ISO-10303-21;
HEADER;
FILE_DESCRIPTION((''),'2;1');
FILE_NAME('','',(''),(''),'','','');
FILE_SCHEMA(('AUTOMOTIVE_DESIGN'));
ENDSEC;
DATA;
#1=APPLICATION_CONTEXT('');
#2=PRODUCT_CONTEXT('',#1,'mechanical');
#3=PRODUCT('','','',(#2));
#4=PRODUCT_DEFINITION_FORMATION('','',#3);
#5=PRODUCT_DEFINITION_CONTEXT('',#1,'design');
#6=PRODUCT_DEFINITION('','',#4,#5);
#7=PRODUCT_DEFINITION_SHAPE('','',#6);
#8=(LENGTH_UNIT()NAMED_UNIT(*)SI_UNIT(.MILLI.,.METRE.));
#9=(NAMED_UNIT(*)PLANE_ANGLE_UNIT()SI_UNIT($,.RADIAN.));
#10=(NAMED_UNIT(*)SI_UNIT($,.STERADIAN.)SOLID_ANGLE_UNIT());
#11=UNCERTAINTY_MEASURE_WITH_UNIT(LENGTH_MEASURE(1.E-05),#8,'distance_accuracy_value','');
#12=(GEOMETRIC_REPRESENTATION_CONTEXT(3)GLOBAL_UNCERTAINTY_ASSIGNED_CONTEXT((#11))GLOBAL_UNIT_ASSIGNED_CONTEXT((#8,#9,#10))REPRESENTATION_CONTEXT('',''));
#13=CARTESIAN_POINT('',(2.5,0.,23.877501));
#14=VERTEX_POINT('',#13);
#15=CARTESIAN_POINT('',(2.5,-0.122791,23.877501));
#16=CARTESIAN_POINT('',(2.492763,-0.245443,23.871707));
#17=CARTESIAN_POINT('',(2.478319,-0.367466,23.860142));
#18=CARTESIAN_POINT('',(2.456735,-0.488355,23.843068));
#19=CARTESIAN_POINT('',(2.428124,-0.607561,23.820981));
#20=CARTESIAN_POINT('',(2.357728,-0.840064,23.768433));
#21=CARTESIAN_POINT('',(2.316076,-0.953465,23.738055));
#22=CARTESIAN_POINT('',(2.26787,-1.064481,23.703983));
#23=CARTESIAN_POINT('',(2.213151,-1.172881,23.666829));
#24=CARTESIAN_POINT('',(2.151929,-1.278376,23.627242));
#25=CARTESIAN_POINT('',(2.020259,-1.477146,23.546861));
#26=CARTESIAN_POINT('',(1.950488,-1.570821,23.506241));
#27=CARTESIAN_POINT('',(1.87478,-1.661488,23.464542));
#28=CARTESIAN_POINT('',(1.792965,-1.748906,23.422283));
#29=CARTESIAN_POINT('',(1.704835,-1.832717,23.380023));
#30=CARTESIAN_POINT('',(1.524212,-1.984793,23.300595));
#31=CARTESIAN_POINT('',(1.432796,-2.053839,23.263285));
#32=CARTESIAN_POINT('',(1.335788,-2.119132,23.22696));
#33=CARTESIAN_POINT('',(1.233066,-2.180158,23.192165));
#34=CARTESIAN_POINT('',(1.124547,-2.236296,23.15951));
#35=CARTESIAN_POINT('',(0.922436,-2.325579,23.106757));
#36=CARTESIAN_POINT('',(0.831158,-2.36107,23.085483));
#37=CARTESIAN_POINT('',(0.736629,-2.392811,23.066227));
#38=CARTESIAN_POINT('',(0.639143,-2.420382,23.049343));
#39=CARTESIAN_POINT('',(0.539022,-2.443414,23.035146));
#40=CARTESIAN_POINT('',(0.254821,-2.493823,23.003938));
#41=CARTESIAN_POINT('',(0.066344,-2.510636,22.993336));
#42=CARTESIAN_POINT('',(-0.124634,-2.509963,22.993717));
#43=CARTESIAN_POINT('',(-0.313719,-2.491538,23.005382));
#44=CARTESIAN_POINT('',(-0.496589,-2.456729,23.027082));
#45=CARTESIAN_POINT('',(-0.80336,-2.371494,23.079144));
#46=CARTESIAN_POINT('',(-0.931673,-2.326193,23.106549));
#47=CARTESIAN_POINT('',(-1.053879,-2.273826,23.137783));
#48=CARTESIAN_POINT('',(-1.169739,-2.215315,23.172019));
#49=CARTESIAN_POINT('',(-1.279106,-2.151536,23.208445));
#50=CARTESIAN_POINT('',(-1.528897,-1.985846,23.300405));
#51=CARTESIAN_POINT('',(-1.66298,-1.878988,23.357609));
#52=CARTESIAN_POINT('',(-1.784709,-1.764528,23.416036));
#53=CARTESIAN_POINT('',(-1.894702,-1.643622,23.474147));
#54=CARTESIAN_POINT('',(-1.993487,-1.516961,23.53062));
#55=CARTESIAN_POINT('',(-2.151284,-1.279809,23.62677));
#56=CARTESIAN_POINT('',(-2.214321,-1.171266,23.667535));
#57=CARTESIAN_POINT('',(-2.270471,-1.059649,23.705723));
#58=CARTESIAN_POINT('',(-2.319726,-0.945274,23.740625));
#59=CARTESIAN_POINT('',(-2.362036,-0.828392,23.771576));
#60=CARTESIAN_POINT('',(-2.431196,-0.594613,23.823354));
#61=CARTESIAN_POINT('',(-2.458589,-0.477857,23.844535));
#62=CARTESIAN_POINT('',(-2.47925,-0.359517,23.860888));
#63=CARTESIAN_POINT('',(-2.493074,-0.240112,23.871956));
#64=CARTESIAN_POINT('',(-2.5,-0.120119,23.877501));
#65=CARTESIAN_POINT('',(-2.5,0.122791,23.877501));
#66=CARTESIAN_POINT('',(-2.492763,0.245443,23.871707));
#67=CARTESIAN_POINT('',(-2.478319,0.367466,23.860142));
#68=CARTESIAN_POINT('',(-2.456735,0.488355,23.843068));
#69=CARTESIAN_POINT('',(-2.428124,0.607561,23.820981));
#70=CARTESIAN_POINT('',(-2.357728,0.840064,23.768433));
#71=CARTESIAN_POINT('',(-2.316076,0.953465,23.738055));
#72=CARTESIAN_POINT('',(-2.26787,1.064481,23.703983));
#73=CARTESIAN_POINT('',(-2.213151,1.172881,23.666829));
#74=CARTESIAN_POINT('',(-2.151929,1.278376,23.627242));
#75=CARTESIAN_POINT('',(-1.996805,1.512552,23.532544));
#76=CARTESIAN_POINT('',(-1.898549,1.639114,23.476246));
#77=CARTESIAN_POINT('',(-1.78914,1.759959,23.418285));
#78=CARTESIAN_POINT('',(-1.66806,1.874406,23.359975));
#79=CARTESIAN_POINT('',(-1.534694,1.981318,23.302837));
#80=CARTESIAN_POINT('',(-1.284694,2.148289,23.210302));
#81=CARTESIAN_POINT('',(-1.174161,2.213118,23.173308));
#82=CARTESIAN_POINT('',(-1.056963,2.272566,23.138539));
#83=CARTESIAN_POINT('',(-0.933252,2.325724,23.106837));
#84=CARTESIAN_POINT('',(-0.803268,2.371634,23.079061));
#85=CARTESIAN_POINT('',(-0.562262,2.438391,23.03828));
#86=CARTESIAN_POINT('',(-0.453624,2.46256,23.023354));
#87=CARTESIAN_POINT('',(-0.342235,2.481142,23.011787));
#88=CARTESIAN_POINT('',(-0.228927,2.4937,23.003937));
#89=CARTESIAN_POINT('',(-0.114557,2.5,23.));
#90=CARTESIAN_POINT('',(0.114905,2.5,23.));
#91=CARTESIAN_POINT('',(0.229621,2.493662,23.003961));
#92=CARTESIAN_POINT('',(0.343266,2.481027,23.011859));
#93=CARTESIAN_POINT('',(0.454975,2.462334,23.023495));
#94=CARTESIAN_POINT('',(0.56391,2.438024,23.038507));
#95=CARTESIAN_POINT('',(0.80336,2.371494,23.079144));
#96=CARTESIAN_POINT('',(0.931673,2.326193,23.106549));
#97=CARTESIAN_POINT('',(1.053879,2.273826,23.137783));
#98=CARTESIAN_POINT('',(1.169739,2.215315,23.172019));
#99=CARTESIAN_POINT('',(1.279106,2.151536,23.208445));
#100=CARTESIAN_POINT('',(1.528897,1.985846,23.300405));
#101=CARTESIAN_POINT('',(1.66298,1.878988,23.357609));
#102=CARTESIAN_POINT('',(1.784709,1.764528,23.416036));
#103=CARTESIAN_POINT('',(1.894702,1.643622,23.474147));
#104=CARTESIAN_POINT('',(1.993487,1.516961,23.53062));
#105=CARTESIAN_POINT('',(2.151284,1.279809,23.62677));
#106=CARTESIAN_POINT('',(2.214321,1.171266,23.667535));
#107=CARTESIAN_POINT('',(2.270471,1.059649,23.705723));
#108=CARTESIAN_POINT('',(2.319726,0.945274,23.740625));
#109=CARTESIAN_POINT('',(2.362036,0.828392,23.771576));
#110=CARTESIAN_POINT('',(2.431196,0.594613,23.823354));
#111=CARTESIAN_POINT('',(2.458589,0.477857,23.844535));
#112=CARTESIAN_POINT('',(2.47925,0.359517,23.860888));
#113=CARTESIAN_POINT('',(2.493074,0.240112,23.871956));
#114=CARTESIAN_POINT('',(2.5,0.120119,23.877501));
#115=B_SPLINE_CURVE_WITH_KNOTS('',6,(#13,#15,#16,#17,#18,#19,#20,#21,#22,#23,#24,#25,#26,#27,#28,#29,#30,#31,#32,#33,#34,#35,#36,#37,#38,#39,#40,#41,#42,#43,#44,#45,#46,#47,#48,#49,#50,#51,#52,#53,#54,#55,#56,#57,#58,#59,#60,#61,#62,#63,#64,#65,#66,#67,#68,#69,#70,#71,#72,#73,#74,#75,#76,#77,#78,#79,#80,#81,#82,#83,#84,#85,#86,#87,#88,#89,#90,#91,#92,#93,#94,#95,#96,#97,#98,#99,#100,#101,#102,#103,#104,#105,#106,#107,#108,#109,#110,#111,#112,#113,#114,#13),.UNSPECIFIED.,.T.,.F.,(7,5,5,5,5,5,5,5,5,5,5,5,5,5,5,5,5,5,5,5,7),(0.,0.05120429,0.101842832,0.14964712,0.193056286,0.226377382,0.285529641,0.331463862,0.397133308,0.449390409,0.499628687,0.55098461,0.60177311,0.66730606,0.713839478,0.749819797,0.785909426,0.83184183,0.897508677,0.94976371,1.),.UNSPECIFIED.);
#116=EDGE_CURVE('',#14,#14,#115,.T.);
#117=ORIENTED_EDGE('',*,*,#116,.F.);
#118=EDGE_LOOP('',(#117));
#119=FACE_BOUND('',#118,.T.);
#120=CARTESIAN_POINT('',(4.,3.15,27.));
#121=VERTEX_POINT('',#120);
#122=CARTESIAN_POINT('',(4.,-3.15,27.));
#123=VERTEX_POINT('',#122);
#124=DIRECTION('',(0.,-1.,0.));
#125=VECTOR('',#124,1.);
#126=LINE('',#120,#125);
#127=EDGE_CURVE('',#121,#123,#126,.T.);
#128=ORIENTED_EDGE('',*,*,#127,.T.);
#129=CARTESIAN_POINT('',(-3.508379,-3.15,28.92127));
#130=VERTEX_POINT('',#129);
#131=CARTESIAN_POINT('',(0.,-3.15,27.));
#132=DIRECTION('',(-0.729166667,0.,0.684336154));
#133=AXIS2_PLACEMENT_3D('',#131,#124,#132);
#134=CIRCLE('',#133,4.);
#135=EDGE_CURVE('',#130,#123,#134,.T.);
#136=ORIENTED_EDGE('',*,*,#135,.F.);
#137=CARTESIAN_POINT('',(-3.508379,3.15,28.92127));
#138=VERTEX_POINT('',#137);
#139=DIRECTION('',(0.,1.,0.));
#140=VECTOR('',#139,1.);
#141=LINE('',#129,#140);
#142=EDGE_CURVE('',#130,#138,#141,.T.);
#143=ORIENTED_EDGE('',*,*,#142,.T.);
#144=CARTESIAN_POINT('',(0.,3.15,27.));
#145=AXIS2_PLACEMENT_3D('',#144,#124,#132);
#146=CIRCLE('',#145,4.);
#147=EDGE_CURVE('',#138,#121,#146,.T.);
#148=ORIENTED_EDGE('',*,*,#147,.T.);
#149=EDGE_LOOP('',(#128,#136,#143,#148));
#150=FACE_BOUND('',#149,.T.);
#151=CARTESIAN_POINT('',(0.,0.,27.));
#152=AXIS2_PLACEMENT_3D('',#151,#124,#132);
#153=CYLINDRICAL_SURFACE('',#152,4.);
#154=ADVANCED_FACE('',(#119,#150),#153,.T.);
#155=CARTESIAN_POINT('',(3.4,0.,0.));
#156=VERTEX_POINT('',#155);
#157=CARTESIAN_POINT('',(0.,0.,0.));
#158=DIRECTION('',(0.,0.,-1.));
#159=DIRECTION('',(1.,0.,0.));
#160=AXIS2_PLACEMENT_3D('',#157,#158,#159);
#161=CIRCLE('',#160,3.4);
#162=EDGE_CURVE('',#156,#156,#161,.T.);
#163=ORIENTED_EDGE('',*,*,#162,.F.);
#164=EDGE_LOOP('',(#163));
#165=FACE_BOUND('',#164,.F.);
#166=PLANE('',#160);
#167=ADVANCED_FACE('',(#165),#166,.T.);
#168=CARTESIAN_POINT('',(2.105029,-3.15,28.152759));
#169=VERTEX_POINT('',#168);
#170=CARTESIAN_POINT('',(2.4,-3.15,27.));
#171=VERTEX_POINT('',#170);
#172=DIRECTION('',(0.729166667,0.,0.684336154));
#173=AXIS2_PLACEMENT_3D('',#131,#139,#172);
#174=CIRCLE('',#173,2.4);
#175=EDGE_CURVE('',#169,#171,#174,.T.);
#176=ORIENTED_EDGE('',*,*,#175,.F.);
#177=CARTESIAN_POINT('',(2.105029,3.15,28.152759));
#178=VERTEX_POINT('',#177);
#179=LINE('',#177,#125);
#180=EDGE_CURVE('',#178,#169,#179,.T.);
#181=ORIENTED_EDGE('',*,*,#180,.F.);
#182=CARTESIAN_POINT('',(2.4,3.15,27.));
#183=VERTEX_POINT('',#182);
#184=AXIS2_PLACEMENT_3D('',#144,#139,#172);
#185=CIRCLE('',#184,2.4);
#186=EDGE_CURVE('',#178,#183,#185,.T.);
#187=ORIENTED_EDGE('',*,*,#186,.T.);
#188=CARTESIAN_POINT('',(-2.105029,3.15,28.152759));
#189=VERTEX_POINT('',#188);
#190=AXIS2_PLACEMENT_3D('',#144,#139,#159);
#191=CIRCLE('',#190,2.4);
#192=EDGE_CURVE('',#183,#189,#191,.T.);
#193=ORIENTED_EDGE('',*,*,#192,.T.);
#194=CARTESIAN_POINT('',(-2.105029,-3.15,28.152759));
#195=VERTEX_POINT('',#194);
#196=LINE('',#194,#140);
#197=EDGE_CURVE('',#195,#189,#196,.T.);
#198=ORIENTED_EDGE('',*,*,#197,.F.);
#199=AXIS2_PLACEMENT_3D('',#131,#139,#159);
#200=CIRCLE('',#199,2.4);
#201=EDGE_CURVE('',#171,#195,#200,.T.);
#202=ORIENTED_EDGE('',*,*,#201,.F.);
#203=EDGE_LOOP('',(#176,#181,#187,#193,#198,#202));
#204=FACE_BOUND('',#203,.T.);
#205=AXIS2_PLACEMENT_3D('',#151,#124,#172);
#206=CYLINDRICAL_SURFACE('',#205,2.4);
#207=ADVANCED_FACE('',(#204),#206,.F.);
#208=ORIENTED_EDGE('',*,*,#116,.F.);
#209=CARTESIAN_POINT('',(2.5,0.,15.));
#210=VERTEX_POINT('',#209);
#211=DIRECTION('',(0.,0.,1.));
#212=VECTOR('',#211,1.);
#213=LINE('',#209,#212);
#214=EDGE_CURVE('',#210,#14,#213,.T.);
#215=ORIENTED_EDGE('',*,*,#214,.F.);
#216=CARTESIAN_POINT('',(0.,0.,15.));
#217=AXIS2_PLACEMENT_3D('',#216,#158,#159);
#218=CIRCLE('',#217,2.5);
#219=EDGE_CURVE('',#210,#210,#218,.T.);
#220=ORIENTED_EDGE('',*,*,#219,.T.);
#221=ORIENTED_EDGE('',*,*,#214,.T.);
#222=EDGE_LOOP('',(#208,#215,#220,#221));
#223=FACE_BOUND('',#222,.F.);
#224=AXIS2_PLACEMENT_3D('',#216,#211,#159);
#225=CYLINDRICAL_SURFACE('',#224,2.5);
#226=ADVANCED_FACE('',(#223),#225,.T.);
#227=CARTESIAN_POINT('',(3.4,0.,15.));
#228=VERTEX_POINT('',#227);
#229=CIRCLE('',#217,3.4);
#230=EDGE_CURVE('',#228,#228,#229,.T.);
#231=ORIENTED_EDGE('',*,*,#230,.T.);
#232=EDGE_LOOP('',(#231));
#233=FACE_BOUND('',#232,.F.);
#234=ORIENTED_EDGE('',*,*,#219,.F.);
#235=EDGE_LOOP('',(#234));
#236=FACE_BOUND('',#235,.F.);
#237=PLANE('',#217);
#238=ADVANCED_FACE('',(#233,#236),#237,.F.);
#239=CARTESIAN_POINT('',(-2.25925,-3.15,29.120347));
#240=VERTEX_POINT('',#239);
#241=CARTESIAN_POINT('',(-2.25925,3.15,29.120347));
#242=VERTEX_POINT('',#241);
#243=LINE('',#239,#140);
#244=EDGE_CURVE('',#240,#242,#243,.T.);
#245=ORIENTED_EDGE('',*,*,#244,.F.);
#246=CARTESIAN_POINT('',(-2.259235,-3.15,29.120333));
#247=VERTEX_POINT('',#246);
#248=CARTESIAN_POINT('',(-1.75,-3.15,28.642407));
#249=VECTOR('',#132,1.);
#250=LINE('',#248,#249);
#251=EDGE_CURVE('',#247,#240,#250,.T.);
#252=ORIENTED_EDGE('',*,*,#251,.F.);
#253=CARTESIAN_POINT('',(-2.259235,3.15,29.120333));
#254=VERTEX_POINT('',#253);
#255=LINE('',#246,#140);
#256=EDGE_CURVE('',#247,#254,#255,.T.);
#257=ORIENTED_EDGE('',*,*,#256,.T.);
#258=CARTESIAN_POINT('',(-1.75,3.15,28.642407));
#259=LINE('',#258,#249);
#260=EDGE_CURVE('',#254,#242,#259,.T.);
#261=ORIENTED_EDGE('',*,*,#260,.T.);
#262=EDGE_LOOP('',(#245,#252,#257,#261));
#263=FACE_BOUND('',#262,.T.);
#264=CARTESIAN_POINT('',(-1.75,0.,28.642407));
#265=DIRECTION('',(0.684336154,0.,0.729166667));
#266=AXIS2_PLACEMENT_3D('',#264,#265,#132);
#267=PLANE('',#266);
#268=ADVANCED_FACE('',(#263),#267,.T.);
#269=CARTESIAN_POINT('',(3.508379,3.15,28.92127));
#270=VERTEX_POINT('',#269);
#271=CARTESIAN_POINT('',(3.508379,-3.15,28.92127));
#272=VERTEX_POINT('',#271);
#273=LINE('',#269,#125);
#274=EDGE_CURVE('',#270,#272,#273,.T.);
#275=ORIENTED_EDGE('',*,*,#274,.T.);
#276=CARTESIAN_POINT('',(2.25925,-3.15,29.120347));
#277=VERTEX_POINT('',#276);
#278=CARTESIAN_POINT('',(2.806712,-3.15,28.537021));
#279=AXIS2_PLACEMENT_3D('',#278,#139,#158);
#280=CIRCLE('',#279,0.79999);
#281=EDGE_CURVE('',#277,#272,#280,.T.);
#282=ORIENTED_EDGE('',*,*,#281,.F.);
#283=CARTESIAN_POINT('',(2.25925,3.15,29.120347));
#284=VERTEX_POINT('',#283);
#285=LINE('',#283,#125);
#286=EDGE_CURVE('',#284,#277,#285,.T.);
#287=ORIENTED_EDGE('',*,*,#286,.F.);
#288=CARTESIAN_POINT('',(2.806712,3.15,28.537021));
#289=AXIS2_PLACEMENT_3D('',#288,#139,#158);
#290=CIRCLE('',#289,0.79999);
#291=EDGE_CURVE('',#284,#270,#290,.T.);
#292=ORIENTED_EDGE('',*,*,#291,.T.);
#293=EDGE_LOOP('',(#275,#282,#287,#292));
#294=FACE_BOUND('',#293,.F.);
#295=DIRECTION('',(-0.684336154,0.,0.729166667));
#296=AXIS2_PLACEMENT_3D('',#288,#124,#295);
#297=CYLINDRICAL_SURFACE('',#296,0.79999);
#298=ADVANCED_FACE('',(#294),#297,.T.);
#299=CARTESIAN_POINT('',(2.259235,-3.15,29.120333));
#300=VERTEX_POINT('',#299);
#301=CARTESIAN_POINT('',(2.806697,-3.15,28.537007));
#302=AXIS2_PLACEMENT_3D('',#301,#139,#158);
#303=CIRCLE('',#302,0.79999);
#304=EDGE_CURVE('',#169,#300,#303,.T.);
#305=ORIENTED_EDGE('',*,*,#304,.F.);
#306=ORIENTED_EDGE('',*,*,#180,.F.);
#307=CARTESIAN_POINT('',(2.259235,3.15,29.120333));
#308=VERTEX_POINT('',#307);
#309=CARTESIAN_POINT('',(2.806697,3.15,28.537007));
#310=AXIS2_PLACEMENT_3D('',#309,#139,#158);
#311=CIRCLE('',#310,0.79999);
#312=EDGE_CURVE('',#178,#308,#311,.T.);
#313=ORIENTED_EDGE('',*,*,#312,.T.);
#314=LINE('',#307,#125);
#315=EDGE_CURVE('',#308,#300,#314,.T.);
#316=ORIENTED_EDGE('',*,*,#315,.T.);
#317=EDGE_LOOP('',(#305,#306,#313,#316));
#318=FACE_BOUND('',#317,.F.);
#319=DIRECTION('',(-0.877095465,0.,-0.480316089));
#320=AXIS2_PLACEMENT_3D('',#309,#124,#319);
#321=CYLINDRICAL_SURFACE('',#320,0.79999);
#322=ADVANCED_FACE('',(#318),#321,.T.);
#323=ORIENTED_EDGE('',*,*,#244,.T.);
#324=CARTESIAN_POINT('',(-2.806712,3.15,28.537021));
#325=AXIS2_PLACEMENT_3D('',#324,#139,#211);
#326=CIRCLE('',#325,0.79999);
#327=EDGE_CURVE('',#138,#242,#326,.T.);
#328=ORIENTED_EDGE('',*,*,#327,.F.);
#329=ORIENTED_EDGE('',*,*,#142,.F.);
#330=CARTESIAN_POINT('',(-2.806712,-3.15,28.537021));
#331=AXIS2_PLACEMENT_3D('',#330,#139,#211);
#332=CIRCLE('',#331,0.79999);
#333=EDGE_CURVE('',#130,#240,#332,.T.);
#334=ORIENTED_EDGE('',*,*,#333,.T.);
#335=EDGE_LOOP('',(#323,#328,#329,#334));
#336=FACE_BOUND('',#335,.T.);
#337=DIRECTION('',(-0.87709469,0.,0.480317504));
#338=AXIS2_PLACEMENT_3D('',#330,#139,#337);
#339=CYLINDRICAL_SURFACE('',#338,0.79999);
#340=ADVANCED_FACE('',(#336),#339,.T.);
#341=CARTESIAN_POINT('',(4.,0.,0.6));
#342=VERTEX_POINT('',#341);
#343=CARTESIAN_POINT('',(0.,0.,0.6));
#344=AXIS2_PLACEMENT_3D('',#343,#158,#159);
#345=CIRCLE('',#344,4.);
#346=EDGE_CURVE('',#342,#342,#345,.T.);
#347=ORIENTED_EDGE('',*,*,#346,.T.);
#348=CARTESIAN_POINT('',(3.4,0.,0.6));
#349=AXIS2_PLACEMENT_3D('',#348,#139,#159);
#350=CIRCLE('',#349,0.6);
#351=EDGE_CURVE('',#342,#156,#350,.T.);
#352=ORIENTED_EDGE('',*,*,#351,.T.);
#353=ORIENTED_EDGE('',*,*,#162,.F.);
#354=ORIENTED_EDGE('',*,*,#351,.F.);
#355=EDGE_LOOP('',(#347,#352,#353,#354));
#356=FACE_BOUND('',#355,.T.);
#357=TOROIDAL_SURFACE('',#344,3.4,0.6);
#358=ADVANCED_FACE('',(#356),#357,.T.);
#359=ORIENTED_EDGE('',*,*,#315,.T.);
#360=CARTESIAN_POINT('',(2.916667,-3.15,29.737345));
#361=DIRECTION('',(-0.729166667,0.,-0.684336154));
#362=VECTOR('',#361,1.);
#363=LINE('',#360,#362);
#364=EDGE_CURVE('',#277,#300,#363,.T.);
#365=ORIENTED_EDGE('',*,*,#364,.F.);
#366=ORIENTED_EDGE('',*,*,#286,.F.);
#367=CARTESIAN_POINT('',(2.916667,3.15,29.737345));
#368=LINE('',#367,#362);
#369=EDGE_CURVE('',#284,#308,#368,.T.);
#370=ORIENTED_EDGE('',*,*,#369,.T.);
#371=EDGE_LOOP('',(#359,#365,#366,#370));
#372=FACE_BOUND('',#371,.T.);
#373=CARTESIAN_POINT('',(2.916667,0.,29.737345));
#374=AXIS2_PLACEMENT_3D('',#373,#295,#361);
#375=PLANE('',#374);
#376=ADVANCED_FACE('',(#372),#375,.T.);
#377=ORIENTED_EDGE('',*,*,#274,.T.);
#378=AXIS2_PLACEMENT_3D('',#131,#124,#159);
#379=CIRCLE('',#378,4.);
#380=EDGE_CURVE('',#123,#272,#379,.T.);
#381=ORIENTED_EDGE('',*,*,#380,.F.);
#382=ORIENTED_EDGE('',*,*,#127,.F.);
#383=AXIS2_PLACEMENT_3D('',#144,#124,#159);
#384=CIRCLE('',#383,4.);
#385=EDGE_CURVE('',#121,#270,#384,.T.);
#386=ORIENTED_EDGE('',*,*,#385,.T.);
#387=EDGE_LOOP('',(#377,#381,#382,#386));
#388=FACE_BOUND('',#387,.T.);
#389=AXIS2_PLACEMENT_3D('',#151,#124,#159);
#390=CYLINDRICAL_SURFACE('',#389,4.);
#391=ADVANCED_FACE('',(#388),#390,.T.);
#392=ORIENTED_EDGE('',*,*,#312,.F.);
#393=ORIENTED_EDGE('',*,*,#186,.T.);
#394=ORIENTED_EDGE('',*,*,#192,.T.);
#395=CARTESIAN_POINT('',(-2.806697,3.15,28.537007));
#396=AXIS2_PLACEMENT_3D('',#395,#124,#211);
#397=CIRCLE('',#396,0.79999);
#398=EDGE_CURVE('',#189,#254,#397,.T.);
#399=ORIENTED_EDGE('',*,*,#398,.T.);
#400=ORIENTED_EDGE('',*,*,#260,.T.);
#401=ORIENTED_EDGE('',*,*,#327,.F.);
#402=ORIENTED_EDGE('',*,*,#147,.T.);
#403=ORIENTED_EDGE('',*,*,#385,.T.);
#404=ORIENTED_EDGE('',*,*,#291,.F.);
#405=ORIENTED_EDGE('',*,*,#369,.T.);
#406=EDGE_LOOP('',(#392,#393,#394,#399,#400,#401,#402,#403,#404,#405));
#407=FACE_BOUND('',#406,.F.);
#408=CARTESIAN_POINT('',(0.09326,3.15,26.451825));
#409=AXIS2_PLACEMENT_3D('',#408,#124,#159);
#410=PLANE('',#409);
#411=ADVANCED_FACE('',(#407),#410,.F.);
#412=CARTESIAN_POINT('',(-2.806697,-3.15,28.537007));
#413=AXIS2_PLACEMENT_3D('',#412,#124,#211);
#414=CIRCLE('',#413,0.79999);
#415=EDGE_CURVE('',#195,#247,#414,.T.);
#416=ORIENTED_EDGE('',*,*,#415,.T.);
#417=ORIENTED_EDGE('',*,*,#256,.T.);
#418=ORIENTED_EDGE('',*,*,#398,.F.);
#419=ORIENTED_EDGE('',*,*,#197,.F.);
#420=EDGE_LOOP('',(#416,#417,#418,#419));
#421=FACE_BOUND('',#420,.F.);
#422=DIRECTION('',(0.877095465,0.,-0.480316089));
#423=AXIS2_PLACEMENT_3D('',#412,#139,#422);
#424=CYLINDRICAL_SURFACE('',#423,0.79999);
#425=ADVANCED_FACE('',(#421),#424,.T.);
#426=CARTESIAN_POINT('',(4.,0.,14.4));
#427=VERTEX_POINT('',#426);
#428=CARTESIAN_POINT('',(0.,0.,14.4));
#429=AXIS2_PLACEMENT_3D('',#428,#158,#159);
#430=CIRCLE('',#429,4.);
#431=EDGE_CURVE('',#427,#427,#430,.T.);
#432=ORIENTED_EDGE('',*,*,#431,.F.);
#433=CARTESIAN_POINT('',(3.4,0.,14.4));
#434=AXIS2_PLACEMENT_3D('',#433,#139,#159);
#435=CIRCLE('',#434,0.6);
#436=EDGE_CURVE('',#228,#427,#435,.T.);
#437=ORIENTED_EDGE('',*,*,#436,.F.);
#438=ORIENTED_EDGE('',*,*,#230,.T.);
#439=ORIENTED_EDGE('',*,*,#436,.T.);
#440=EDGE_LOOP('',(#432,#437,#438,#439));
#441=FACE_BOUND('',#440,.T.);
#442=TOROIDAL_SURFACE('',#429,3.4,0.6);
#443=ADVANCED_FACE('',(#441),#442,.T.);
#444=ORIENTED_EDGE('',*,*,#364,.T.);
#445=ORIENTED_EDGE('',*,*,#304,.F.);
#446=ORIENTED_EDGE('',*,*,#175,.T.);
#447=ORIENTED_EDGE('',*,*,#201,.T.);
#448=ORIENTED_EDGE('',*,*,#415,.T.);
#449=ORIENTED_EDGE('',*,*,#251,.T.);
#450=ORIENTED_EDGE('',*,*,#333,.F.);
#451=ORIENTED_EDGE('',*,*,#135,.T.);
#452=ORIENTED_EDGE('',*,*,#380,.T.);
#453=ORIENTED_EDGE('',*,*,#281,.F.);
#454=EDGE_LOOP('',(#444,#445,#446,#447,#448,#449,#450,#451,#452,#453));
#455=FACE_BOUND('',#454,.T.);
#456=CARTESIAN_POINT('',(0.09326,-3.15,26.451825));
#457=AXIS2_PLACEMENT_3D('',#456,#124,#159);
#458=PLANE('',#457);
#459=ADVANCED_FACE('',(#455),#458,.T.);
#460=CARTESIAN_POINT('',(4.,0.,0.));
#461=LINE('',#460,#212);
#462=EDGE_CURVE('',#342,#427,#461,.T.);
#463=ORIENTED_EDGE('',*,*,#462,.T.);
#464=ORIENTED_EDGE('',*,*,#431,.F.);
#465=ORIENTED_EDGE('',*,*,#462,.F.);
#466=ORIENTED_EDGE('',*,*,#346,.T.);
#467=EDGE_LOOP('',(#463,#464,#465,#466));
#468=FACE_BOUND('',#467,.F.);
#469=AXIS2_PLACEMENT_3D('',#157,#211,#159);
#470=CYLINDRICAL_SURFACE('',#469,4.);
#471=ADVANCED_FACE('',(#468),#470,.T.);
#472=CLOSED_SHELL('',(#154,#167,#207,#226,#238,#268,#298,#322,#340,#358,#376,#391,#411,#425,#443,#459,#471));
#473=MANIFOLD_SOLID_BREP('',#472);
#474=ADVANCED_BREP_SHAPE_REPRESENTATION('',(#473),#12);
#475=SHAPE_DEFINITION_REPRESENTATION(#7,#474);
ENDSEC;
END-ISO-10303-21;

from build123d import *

# Parameters (mm, degrees)
F3_DEPTH = 3.15
F4_R     = 0.79999
F5_R     = 0.6


# Not quite as in the source:
# - a fillet or chamfer is up to 0.001 mm smaller than in the source, because OpenCascade refuses the exact size


with BuildPart() as f1:
    # F0 (on Front) → F1 (revolve)
    with BuildSketch(Plane.XZ):
        Polygon((0, 24.5), (0, 0), (4, 0), (4, 15), (2.5, 15), (2.5, 24.5), align=None)
    revolve(axis=Axis((0, 0, -0.3548332296), (0, 0, -1)))

    # F2 (on Front) → F3 (join, symmetric)
    with BuildSketch(Plane.XZ):
        with BuildLine():
            ThreePointArc((-2.9166666667, 29.7373446176), (-1.4719601444, 23.2806810659), (4, 27))
            ThreePointArc((4, 27), (3.7193189341, 28.4719601444), (2.9166666667, 29.7373446176))
            Line((2.9166666667, 29.7373446176), (1.75, 28.6424067706))
            ThreePointArc((1.75, 28.6424067706), (2.2315913604, 27.8831760866), (2.4, 27))
            ThreePointArc((2.4, 27), (-0.8831760866, 24.7684086396), (-1.75, 28.6424067706))
            Line((-1.75, 28.6424067706), (-2.9166666667, 29.7373446176))
        make_face()
    extrude(amount=F3_DEPTH, both=True)

    # F4 (radius 0.8 in the source; OpenCascade refuses exactly that, so slightly less here)
    f4_edges = [f1.edges().sort_by_distance(p)[0] for p in [
        (2.916667, -1.575, 29.737345),
        (2.916667, 1.575, 29.737345),
        (1.75, -1.575, 28.642407),
        (1.75, 1.575, 28.642407),
        (-1.75, 1.575, 28.642407),
        (-1.75, -1.575, 28.642407),
        (-2.916667, -1.575, 29.737345),
        (-2.916667, 1.575, 29.737345),
    ]]
    fillet(f4_edges, radius=F4_R)

    # F5
    f5_edges = [f1.edges().sort_by_distance(p)[0] for p in [
        (-4, 0, 0),
        (-4, 0, 15),
    ]]
    fillet(f5_edges, radius=F5_R)


solid = f1.part
